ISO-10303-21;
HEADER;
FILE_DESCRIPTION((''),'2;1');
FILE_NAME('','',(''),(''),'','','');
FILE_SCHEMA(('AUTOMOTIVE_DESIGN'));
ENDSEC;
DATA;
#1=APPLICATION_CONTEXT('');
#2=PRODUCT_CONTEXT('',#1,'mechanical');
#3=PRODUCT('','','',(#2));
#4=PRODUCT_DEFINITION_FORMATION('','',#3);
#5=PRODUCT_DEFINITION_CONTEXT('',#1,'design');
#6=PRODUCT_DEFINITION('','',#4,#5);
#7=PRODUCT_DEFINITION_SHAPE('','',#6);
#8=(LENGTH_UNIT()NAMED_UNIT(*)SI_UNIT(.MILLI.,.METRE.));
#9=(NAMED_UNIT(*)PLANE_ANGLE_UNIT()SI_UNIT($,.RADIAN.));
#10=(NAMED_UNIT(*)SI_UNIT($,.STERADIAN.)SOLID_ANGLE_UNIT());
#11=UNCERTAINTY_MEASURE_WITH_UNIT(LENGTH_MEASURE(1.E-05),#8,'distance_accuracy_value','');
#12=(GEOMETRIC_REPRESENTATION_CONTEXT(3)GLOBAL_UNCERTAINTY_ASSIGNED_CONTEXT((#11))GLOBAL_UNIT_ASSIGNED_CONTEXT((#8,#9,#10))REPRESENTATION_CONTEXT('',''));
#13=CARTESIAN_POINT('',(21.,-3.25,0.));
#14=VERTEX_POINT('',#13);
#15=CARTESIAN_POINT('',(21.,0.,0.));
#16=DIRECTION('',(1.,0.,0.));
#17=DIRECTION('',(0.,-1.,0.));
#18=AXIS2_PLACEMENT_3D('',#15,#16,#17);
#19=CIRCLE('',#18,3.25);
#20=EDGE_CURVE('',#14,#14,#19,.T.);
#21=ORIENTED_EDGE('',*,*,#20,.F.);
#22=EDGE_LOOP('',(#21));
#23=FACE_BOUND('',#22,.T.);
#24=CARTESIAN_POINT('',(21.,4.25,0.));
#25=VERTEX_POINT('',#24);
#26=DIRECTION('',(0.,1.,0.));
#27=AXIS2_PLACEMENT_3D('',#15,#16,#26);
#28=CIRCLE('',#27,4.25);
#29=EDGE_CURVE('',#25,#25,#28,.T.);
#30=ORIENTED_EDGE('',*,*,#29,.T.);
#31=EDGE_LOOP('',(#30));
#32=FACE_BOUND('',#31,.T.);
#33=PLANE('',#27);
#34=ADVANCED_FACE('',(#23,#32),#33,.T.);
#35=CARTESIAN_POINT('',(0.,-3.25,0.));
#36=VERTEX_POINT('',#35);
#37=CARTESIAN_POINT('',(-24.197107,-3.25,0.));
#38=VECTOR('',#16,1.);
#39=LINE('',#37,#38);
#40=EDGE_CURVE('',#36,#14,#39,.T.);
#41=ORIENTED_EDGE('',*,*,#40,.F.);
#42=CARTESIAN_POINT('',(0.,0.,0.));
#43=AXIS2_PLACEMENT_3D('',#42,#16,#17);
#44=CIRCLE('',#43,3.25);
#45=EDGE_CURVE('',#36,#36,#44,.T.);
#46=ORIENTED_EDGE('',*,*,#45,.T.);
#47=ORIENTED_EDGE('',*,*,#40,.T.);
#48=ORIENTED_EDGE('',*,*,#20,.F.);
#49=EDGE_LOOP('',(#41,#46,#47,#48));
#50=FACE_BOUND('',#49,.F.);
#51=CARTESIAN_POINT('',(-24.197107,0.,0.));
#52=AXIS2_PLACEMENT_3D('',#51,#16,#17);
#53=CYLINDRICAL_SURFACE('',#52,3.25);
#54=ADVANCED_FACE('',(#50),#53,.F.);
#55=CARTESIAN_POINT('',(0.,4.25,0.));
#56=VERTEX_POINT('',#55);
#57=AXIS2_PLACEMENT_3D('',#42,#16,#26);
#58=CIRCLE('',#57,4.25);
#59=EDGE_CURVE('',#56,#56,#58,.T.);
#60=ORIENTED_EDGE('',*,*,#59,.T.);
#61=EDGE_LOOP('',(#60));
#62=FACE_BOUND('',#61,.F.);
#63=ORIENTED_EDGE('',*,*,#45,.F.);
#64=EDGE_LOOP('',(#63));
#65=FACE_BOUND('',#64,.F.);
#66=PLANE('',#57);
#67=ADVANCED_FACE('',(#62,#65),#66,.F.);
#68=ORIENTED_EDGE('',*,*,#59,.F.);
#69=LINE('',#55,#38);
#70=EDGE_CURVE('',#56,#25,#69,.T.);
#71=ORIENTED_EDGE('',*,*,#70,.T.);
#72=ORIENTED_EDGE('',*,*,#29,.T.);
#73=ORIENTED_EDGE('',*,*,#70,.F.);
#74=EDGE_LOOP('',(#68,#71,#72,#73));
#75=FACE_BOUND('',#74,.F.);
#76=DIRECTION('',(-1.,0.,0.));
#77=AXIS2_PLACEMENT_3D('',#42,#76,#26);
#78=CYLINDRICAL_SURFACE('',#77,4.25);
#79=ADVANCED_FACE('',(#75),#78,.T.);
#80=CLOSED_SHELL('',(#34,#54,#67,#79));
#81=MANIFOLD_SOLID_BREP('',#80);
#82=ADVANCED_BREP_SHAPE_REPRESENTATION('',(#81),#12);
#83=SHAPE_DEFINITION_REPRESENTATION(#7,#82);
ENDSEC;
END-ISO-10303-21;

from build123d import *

# Parameters (mm, degrees)
F0_R     = 4.25
F1_DEPTH = 21
F2_R     = 4.25
F3_DEPTH = 21
F5_D     = 8.4
F4_R     = 4.2
F7_DEPTH = 21
F8_D     = 6.5


# Not quite as in the source:
# - a feature names something its author has since deleted; it is built from what else it names


with BuildPart() as f1:
    # F0 (on Right) → F1 (new body)
    with BuildSketch(Plane.YZ):
        Circle(F0_R)
    extrude(amount=F1_DEPTH)

    # F2 (on Right) → F3 (join)
    with BuildSketch(Plane.YZ):
        Circle(F2_R)
    extrude(amount=F3_DEPTH)

    # F5 (through all)
    with Locations(Plane(origin=(0, 0, 0), x_dir=(0, 1, 0), z_dir=(-1, 0, 0))):
        with Locations((0, 0)):
            Hole(F5_D / 2)

    # F4 (on face) → F7 (join)
    with BuildSketch(Plane.YZ):
        Circle(F4_R)
    extrude(amount=F7_DEPTH)

    # F8 (through all)
    with Locations(Plane(origin=(0, 0, 0), x_dir=(0, 1, 0), z_dir=(-1, 0, 0))):
        with Locations((0, 0)):
            Hole(F8_D / 2)


solid = f1.part
